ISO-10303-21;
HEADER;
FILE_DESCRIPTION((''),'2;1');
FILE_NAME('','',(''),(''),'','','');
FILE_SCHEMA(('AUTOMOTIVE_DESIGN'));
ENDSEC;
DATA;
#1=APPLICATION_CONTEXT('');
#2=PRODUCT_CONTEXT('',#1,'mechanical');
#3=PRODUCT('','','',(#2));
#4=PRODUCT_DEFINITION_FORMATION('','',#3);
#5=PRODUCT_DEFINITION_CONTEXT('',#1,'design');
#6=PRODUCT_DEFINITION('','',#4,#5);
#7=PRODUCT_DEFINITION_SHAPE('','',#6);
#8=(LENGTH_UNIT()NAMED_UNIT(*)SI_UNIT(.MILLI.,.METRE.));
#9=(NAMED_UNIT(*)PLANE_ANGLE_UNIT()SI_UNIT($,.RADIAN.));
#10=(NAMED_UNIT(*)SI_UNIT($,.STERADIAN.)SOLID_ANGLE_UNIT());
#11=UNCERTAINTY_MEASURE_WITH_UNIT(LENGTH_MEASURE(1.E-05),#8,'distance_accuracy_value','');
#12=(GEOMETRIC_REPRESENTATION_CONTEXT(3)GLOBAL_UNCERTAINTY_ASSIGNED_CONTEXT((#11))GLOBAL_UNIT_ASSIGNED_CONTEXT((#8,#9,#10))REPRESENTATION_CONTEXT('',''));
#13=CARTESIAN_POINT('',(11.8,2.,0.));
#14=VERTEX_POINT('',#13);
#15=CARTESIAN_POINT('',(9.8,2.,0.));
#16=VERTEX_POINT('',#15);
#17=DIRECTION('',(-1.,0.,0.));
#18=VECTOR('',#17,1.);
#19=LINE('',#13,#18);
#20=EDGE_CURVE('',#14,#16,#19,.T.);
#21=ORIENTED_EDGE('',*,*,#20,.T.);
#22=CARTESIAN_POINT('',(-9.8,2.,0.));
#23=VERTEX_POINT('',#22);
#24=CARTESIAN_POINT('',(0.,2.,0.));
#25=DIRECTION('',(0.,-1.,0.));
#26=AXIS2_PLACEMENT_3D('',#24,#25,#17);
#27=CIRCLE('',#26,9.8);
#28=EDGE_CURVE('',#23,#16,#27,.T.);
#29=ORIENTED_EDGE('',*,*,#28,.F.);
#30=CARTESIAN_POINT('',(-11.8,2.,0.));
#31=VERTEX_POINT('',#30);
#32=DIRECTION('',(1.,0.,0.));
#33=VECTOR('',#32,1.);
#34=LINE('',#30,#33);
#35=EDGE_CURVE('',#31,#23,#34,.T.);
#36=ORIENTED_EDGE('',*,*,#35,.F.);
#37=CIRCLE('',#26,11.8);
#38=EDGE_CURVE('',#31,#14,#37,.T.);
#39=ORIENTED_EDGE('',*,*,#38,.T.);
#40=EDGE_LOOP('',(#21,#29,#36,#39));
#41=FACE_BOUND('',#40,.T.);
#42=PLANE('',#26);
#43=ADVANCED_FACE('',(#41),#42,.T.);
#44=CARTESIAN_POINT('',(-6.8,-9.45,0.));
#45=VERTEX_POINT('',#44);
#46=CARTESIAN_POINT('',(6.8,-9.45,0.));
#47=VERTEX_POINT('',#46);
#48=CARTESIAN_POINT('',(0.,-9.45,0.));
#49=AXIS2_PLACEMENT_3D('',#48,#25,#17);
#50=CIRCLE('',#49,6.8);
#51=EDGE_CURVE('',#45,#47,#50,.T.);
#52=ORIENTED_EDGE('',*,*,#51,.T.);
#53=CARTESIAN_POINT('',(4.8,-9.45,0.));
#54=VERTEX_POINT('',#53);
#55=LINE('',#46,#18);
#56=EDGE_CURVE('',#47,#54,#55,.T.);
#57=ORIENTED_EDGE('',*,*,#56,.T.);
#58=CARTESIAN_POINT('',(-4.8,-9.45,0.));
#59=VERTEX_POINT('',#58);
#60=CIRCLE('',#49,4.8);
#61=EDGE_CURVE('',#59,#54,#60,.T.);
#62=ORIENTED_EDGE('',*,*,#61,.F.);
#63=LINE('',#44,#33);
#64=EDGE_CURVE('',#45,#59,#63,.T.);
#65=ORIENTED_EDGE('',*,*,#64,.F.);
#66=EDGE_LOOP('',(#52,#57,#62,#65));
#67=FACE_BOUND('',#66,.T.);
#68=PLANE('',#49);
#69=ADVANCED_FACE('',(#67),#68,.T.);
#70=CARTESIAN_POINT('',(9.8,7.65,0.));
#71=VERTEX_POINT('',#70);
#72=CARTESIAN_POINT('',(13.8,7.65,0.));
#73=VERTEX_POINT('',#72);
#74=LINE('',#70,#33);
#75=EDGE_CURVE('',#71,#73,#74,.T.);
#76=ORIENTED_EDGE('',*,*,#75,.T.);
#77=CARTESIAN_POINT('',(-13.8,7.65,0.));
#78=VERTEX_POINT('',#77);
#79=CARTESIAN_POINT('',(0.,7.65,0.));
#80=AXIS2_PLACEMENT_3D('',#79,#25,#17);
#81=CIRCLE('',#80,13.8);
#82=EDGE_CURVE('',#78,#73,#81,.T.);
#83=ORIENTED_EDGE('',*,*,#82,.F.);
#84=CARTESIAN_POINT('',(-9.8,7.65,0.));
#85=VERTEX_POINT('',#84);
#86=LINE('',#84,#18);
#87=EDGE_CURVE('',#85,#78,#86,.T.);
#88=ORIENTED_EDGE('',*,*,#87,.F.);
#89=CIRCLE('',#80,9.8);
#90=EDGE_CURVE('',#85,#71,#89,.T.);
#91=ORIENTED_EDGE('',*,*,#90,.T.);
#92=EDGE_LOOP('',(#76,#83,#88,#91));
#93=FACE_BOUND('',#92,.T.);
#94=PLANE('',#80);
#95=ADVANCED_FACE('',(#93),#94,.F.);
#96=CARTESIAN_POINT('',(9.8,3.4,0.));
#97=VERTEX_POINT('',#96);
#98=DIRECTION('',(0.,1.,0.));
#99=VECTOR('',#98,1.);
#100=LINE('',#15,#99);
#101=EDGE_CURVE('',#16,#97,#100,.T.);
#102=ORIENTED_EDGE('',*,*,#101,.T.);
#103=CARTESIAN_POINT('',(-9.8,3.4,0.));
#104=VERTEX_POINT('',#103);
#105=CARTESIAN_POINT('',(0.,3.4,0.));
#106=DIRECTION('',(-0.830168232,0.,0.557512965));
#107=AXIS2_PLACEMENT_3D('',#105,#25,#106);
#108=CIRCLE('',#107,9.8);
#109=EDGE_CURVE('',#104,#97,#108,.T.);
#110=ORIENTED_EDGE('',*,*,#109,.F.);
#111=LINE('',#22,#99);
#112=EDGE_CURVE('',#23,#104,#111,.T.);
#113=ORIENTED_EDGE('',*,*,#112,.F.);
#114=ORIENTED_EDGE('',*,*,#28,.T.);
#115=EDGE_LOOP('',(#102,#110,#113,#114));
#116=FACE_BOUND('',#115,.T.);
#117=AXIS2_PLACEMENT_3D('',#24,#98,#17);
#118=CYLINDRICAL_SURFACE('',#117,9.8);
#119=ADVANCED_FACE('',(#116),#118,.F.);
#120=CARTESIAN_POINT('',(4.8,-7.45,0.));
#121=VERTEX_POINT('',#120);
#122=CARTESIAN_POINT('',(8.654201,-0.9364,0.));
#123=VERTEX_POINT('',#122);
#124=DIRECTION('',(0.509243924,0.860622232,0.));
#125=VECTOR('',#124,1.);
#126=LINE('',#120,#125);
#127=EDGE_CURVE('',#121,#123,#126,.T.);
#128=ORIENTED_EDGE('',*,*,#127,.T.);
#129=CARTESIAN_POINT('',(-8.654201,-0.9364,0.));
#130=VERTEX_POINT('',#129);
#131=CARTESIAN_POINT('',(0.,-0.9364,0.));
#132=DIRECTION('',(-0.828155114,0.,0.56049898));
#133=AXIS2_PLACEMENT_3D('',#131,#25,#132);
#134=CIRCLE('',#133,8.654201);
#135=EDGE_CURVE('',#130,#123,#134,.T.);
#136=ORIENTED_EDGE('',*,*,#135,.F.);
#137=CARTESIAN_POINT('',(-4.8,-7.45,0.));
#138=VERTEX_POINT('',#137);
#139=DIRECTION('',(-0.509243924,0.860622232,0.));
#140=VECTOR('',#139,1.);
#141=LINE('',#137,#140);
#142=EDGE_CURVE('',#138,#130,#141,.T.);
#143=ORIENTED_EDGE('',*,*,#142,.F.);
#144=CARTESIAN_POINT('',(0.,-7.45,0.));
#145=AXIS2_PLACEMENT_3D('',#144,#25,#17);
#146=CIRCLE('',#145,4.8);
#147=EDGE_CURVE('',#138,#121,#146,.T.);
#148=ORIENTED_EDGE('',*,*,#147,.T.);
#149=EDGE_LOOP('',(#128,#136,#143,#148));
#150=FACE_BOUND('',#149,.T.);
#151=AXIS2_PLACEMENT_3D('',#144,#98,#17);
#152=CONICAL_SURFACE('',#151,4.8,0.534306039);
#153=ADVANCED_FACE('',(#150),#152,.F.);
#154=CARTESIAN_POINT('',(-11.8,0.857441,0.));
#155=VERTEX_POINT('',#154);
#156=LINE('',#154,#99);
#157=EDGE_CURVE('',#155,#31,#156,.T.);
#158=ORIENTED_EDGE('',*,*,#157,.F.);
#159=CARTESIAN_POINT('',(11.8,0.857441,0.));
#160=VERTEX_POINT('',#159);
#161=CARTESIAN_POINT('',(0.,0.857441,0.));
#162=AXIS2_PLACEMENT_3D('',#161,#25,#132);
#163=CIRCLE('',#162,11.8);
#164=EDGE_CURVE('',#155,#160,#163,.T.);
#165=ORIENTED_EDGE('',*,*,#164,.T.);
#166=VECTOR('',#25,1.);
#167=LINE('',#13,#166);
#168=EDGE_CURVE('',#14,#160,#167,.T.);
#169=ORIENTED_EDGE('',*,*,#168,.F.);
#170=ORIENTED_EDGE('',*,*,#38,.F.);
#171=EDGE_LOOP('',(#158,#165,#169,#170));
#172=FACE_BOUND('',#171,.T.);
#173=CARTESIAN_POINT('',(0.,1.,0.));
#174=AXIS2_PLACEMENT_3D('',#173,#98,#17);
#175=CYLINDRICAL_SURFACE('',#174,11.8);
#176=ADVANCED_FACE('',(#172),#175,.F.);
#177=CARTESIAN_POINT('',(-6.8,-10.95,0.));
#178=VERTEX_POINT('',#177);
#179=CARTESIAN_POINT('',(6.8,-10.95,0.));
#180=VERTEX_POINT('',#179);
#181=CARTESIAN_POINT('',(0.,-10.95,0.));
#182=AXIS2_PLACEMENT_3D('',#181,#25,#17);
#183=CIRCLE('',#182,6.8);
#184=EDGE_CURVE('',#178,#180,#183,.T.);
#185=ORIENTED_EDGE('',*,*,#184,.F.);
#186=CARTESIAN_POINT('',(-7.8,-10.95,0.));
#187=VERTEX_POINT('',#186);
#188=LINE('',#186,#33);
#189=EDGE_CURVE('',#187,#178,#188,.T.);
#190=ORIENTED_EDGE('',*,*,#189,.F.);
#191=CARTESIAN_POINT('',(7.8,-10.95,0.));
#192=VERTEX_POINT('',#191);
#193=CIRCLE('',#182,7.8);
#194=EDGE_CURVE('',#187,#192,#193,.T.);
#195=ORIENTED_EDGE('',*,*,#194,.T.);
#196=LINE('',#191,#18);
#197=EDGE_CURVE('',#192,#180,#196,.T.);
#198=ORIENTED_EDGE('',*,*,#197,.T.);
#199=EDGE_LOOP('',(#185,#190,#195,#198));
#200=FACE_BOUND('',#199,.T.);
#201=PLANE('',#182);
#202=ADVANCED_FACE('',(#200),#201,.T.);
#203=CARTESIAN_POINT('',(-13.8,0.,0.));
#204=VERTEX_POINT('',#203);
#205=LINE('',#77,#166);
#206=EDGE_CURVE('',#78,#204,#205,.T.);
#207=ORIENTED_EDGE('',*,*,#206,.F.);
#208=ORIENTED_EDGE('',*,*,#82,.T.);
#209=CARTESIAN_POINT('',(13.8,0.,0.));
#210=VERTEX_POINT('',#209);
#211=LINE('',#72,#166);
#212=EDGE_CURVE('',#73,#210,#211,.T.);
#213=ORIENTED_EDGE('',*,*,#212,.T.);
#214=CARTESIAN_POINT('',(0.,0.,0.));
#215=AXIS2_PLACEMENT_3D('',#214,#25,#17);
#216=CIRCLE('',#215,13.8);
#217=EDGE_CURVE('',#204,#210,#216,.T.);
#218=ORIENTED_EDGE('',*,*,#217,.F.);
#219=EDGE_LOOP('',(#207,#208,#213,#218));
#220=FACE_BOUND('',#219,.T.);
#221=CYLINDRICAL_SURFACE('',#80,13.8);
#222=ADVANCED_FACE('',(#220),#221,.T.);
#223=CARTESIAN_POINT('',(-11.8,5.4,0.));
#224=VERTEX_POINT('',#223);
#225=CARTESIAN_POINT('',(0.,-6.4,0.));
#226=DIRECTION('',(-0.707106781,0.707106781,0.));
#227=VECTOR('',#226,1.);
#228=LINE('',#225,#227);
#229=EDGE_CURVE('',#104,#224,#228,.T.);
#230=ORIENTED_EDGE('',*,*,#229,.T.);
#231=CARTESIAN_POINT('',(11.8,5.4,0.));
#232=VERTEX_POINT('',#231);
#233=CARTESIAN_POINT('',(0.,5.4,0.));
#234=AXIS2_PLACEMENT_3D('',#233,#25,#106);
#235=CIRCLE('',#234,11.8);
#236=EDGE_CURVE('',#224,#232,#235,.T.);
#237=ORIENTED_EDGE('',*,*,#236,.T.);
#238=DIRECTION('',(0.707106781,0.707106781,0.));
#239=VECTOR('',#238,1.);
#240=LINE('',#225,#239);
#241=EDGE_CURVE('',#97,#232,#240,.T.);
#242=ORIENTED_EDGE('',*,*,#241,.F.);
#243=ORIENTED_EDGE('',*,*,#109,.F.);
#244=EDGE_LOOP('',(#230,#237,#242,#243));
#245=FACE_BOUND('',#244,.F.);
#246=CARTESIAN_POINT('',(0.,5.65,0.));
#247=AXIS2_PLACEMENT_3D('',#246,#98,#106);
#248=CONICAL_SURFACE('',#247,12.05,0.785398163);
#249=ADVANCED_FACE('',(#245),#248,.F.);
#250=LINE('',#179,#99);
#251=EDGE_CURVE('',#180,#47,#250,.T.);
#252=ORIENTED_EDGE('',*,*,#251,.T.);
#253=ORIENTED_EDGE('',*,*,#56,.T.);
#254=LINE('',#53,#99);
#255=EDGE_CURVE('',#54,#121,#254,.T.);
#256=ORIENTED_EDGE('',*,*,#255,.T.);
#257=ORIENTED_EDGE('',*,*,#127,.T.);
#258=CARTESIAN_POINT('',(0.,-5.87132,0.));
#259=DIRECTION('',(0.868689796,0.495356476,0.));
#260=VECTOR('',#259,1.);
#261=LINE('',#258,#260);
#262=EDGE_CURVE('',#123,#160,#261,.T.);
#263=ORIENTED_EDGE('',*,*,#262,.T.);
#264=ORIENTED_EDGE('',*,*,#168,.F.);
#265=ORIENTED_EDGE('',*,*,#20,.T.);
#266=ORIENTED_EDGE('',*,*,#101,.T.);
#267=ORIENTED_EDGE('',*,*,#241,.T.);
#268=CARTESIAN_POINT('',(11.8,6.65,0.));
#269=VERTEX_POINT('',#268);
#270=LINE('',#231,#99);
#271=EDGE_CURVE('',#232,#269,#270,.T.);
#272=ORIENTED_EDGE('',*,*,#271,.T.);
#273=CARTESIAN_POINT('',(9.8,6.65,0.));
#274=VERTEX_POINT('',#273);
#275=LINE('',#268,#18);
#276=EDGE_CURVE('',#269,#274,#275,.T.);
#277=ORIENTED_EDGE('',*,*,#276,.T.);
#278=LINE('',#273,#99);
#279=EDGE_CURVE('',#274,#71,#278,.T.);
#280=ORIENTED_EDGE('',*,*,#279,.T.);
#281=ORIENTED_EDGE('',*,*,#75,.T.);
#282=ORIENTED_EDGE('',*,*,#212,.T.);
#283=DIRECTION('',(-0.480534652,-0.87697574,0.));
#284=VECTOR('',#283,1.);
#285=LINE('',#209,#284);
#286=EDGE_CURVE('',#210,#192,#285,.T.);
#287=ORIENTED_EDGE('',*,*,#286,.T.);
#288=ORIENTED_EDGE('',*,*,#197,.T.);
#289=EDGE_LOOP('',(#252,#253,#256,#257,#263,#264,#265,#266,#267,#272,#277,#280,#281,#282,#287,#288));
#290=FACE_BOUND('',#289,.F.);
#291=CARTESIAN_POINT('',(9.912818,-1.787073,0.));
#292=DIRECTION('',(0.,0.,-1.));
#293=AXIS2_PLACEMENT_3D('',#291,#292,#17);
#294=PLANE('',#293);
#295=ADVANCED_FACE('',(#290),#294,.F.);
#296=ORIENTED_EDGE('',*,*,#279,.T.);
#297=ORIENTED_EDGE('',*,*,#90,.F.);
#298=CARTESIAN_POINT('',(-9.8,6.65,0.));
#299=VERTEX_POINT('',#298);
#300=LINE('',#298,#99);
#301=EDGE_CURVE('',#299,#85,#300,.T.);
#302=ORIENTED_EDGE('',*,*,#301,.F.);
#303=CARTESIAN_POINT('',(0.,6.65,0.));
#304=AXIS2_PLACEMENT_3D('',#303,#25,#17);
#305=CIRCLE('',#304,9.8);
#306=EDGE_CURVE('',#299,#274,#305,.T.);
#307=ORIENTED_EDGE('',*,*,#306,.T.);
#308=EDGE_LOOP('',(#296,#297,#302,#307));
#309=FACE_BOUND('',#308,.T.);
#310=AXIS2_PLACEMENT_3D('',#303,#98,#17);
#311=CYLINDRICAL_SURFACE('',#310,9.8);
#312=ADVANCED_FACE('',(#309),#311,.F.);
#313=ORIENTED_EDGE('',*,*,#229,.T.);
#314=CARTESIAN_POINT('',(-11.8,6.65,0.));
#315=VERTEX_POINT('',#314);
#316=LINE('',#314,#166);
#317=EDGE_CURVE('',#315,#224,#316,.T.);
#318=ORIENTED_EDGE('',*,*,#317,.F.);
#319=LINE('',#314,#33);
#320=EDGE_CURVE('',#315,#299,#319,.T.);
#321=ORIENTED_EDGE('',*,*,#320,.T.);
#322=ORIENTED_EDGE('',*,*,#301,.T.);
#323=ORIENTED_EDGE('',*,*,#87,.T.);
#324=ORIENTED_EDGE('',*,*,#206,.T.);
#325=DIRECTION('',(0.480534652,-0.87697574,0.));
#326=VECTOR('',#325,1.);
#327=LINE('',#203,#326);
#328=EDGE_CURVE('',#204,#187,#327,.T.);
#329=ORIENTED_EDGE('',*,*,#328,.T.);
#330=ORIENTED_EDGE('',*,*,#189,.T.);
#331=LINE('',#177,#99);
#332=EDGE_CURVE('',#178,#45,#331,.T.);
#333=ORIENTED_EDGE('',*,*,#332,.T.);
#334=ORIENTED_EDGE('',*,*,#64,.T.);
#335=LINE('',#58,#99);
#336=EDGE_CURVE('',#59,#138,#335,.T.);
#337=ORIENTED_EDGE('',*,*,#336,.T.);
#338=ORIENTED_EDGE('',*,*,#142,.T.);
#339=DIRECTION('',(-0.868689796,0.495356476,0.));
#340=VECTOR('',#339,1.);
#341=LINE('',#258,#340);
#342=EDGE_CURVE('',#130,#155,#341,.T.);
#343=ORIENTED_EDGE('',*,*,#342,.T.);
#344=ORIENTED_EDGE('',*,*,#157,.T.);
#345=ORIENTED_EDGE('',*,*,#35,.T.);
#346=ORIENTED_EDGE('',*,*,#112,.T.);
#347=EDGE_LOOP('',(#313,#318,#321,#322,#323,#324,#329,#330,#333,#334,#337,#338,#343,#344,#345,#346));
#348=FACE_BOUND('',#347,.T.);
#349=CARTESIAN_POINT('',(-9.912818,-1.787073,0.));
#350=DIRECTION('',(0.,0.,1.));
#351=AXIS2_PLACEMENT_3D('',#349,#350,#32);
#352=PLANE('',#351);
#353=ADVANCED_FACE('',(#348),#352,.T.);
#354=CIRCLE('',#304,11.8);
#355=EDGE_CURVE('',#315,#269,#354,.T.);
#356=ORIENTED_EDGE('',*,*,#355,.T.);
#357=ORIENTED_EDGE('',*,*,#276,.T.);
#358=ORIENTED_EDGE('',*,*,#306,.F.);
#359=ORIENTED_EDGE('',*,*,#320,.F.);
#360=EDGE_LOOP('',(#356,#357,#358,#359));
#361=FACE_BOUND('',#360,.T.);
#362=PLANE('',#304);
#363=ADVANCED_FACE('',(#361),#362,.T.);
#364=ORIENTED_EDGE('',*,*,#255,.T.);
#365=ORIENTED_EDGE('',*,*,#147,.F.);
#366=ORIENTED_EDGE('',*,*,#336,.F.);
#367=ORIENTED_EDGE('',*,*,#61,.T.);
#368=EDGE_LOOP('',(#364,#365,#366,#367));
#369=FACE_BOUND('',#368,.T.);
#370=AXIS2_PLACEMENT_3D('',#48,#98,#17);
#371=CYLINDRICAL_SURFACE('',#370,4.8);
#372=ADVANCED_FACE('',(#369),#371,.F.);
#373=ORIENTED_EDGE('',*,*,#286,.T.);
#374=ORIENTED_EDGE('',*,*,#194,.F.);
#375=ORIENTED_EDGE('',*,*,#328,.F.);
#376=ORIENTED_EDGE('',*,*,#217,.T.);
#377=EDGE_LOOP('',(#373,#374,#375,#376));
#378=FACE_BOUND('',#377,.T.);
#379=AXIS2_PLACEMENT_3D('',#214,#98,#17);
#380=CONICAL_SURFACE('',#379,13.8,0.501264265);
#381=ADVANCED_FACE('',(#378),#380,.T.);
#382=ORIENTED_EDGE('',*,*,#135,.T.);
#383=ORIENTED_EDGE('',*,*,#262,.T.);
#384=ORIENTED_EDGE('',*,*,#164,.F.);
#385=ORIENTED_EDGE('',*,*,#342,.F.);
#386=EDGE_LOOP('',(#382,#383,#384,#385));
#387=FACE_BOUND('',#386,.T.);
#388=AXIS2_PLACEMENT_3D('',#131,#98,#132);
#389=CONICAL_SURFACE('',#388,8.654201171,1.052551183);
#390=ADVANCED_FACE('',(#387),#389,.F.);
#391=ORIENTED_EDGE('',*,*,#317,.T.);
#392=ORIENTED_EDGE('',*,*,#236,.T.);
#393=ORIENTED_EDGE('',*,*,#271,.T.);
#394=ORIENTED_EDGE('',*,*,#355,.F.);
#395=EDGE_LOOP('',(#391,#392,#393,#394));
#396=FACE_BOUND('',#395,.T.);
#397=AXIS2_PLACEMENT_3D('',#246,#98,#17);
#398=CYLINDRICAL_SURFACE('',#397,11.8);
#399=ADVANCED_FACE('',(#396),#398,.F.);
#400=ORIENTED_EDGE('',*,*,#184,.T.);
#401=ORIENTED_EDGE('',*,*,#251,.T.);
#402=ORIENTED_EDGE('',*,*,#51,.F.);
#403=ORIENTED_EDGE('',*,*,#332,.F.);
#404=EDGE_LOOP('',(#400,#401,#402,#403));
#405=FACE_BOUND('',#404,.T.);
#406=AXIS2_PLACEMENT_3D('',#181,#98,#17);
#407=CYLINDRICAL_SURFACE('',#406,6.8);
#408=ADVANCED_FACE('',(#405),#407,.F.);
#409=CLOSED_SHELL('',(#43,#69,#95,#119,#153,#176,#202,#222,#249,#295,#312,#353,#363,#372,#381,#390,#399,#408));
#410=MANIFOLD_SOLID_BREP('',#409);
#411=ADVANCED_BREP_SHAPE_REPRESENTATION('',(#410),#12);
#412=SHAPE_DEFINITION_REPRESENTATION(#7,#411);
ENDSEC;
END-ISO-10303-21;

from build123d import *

# Parameters (mm, degrees)
F1_ANGLE    = 180
F2_T4_ANGLE = 248.1806251609
F2_S5_R     = 11.8
F2_T6_DEPTH = 17
F3_T4_ANGLE = 247.7679532438
F3_S5_R     = 11.8
F3_T6_DEPTH = 17


# Not quite as in the source:
# - a fillet or chamfer that OpenCascade refuses, or shapes differently, is made with other operations: its cross-section is extruded or revolved along the edge and cut away or added


with BuildPart() as f1:
    # F0 (on Top) → F1 (revolve)
    with BuildSketch(Plane.XY):
        Polygon((-11.8, 5.65), (-11.8, 6.65), (-13.8, 6.65), (-13.8, 0), (-7.8, -10.95), (-6.8, -10.95), (-6.8, -9.45), (-4.8, -9.45), (-4.8, -7.45), (-9.8, 1), (-11.8, 1), (-11.8, 2), (-9.8, 2), (-9.8, 5.65), align=None)
        Polygon((-13.8, 6.65), (-11.8, 6.65), (-9.8, 6.65), (-9.8, 7.65), (-13.8, 7.65), align=None)
    revolve(axis=Axis((0, 0, 0), (0, -1, 0)), revolution_arc=F1_ANGLE)

    # F2: chamfer of 2.25 on 1 edges, made by hand


with BuildPart() as f2_tool2:
    # F2_s3 → F2_t4 (revolve)
    with BuildSketch(Plane(origin=(0, 0, 0), x_dir=(0, 1, 0), z_dir=(0.5604989803, 0, 0.8281551142))):
        Polygon((-0.9364000214, 8.6542011708), (1, 12.05), (1, 9.8), align=None)
    revolve(axis=Axis((0, 1, 0), (0, -1, 0)), revolution_arc=F2_T4_ANGLE)

    # F2_s5 → F2_t6 (intersect, symmetric)
    with BuildSketch(Plane.XZ):
        Circle(F2_S5_R)
    extrude(amount=F2_T6_DEPTH, both=True, mode=Mode.INTERSECT)


with BuildPart() as f1_1:
    add(f1.part)

    # F2_t1: cut F2_tool2
    add(f2_tool2.part, mode=Mode.SUBTRACT)

    # F3: chamfer of 2.25 on 1 edges, made by hand


with BuildPart() as f3_tool2:
    # F3_s3 → F3_t4 (revolve)
    with BuildSketch(Plane(origin=(0, 0, 0), x_dir=(0, 1, 0), z_dir=(0.5575129654, 0, 0.830168232))):
        Polygon((5.65, 12.05), (3.4, 9.8), (5.65, 9.8), align=None)
    revolve(axis=Axis((0, 5.65, 0), (0, -1, 0)), revolution_arc=F3_T4_ANGLE)

    # F3_s5 → F3_t6 (intersect, symmetric)
    with BuildSketch(Plane.XZ.offset(-4.5)):
        Circle(F3_S5_R)
    extrude(amount=F3_T6_DEPTH, both=True, mode=Mode.INTERSECT)


with BuildPart() as f1_2:
    add(f1_1.part)

    # F3_t1: cut F3_tool2
    add(f3_tool2.part, mode=Mode.SUBTRACT)


solid = f1_2.part
